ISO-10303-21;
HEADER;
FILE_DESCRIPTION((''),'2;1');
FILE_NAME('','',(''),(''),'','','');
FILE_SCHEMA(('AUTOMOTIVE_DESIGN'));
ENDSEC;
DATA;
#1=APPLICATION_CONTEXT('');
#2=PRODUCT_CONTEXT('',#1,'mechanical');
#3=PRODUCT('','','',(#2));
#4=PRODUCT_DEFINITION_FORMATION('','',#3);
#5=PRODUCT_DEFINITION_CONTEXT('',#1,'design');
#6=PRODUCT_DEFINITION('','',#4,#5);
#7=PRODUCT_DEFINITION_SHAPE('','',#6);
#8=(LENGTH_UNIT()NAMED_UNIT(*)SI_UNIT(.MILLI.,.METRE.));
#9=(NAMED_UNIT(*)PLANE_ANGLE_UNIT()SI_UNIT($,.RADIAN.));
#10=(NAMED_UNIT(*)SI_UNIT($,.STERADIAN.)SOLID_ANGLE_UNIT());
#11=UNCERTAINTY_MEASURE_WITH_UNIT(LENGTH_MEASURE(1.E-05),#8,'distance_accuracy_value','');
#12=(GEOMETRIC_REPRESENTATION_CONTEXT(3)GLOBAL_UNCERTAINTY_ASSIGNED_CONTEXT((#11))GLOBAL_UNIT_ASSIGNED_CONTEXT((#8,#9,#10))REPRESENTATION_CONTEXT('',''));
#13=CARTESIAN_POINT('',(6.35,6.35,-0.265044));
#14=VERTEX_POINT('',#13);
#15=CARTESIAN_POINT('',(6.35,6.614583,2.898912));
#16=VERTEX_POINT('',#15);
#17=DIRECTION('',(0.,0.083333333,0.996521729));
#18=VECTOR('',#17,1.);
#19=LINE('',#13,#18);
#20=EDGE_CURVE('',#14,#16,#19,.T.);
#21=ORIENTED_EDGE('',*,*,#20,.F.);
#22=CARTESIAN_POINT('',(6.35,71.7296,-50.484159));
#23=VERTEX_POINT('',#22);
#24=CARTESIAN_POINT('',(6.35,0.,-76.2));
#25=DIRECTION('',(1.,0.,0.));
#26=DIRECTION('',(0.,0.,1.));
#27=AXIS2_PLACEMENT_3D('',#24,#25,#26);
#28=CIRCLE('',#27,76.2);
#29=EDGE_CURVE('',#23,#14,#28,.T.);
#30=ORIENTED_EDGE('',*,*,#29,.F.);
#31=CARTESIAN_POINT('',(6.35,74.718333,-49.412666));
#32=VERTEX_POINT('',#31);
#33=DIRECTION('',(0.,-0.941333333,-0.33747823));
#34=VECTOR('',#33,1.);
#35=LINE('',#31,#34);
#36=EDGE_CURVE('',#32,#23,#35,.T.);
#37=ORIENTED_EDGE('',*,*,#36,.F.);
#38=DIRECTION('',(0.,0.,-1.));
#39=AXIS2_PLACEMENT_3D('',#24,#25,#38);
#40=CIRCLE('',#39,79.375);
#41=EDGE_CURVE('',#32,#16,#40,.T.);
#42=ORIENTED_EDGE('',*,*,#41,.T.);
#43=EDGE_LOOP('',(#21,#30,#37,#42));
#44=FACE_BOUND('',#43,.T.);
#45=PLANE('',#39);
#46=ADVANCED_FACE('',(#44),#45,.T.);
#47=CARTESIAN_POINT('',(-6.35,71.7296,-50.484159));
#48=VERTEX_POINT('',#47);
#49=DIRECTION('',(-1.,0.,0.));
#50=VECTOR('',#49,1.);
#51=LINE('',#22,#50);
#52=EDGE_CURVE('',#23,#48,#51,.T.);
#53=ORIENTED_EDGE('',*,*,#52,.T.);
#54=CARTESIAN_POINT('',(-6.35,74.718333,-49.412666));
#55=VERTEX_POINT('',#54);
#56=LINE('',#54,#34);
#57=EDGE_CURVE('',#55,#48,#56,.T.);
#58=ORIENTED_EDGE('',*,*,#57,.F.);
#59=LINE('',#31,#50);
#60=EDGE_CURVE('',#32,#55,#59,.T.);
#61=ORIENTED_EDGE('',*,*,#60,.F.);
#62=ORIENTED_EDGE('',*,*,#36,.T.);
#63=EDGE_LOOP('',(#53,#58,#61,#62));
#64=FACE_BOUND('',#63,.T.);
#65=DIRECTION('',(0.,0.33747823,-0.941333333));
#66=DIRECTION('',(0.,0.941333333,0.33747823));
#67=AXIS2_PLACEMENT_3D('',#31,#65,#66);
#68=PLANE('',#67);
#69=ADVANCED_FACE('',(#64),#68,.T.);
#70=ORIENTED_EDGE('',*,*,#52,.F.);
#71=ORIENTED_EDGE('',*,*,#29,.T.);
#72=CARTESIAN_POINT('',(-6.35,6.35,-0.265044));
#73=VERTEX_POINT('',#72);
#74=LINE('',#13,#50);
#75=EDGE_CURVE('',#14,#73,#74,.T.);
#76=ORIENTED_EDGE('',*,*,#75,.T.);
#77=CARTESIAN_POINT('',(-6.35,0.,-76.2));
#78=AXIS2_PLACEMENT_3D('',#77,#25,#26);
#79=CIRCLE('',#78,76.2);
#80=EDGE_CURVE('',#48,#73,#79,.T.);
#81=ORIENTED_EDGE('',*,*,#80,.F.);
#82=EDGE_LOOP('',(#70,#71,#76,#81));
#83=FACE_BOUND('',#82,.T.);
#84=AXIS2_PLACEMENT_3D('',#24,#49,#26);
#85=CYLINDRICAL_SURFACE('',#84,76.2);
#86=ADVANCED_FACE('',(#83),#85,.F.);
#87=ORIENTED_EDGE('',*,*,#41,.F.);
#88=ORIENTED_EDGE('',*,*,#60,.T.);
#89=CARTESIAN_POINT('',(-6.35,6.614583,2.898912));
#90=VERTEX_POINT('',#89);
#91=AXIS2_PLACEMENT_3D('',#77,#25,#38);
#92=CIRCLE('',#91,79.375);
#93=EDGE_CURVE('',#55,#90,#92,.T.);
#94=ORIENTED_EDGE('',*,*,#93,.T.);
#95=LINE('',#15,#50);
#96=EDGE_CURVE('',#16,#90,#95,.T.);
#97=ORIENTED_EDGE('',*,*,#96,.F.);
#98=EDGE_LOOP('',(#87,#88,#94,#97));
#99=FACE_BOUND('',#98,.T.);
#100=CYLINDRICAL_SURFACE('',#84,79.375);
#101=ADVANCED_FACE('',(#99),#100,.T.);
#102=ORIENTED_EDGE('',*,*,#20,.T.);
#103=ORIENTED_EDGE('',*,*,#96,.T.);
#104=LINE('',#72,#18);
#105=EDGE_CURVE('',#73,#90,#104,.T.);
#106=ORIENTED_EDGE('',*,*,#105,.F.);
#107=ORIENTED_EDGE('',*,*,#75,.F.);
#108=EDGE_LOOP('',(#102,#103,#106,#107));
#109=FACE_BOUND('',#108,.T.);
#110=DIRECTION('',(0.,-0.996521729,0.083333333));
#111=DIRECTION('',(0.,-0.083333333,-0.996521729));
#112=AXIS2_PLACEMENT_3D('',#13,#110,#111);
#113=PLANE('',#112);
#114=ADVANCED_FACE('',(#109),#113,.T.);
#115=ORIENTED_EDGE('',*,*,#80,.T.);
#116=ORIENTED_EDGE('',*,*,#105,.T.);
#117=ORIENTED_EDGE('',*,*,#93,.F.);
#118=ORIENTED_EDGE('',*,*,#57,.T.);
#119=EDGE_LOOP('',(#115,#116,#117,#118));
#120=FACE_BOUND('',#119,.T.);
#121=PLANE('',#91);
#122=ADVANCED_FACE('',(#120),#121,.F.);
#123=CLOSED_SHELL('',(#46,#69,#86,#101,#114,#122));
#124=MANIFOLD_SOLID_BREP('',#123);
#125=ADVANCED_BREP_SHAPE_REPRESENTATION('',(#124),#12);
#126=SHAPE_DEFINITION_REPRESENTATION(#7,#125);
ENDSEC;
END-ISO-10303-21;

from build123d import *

# Parameters (mm, degrees)
BASE_FLANGE1_DEPTH = 6.35


# Sheet-metal steps are written as plain solids
with BuildPart() as part:
    # Sketch2 → Base-Flange1 (new, symmetric)
    with BuildSketch(Plane(origin=(0, 0, 0), x_dir=(0, 0, -1), z_dir=(1, 0, 0))):
        with BuildLine():
            ThreePointArc((0.265044281, 6.35), (15.769509783, 46.41762437), (50.484158893, 71.7296))
            Line((50.484158893, 71.7296), (49.412665514, 74.718333333))
            ThreePointArc((49.412665514, 74.718333333), (13.251572691, 48.351692052), (-2.898912207, 6.614583333))
            Line((-2.898912207, 6.614583333), (0.265044281, 6.35))
        make_face()
    extrude(amount=BASE_FLANGE1_DEPTH, both=True)


solid = part.part
